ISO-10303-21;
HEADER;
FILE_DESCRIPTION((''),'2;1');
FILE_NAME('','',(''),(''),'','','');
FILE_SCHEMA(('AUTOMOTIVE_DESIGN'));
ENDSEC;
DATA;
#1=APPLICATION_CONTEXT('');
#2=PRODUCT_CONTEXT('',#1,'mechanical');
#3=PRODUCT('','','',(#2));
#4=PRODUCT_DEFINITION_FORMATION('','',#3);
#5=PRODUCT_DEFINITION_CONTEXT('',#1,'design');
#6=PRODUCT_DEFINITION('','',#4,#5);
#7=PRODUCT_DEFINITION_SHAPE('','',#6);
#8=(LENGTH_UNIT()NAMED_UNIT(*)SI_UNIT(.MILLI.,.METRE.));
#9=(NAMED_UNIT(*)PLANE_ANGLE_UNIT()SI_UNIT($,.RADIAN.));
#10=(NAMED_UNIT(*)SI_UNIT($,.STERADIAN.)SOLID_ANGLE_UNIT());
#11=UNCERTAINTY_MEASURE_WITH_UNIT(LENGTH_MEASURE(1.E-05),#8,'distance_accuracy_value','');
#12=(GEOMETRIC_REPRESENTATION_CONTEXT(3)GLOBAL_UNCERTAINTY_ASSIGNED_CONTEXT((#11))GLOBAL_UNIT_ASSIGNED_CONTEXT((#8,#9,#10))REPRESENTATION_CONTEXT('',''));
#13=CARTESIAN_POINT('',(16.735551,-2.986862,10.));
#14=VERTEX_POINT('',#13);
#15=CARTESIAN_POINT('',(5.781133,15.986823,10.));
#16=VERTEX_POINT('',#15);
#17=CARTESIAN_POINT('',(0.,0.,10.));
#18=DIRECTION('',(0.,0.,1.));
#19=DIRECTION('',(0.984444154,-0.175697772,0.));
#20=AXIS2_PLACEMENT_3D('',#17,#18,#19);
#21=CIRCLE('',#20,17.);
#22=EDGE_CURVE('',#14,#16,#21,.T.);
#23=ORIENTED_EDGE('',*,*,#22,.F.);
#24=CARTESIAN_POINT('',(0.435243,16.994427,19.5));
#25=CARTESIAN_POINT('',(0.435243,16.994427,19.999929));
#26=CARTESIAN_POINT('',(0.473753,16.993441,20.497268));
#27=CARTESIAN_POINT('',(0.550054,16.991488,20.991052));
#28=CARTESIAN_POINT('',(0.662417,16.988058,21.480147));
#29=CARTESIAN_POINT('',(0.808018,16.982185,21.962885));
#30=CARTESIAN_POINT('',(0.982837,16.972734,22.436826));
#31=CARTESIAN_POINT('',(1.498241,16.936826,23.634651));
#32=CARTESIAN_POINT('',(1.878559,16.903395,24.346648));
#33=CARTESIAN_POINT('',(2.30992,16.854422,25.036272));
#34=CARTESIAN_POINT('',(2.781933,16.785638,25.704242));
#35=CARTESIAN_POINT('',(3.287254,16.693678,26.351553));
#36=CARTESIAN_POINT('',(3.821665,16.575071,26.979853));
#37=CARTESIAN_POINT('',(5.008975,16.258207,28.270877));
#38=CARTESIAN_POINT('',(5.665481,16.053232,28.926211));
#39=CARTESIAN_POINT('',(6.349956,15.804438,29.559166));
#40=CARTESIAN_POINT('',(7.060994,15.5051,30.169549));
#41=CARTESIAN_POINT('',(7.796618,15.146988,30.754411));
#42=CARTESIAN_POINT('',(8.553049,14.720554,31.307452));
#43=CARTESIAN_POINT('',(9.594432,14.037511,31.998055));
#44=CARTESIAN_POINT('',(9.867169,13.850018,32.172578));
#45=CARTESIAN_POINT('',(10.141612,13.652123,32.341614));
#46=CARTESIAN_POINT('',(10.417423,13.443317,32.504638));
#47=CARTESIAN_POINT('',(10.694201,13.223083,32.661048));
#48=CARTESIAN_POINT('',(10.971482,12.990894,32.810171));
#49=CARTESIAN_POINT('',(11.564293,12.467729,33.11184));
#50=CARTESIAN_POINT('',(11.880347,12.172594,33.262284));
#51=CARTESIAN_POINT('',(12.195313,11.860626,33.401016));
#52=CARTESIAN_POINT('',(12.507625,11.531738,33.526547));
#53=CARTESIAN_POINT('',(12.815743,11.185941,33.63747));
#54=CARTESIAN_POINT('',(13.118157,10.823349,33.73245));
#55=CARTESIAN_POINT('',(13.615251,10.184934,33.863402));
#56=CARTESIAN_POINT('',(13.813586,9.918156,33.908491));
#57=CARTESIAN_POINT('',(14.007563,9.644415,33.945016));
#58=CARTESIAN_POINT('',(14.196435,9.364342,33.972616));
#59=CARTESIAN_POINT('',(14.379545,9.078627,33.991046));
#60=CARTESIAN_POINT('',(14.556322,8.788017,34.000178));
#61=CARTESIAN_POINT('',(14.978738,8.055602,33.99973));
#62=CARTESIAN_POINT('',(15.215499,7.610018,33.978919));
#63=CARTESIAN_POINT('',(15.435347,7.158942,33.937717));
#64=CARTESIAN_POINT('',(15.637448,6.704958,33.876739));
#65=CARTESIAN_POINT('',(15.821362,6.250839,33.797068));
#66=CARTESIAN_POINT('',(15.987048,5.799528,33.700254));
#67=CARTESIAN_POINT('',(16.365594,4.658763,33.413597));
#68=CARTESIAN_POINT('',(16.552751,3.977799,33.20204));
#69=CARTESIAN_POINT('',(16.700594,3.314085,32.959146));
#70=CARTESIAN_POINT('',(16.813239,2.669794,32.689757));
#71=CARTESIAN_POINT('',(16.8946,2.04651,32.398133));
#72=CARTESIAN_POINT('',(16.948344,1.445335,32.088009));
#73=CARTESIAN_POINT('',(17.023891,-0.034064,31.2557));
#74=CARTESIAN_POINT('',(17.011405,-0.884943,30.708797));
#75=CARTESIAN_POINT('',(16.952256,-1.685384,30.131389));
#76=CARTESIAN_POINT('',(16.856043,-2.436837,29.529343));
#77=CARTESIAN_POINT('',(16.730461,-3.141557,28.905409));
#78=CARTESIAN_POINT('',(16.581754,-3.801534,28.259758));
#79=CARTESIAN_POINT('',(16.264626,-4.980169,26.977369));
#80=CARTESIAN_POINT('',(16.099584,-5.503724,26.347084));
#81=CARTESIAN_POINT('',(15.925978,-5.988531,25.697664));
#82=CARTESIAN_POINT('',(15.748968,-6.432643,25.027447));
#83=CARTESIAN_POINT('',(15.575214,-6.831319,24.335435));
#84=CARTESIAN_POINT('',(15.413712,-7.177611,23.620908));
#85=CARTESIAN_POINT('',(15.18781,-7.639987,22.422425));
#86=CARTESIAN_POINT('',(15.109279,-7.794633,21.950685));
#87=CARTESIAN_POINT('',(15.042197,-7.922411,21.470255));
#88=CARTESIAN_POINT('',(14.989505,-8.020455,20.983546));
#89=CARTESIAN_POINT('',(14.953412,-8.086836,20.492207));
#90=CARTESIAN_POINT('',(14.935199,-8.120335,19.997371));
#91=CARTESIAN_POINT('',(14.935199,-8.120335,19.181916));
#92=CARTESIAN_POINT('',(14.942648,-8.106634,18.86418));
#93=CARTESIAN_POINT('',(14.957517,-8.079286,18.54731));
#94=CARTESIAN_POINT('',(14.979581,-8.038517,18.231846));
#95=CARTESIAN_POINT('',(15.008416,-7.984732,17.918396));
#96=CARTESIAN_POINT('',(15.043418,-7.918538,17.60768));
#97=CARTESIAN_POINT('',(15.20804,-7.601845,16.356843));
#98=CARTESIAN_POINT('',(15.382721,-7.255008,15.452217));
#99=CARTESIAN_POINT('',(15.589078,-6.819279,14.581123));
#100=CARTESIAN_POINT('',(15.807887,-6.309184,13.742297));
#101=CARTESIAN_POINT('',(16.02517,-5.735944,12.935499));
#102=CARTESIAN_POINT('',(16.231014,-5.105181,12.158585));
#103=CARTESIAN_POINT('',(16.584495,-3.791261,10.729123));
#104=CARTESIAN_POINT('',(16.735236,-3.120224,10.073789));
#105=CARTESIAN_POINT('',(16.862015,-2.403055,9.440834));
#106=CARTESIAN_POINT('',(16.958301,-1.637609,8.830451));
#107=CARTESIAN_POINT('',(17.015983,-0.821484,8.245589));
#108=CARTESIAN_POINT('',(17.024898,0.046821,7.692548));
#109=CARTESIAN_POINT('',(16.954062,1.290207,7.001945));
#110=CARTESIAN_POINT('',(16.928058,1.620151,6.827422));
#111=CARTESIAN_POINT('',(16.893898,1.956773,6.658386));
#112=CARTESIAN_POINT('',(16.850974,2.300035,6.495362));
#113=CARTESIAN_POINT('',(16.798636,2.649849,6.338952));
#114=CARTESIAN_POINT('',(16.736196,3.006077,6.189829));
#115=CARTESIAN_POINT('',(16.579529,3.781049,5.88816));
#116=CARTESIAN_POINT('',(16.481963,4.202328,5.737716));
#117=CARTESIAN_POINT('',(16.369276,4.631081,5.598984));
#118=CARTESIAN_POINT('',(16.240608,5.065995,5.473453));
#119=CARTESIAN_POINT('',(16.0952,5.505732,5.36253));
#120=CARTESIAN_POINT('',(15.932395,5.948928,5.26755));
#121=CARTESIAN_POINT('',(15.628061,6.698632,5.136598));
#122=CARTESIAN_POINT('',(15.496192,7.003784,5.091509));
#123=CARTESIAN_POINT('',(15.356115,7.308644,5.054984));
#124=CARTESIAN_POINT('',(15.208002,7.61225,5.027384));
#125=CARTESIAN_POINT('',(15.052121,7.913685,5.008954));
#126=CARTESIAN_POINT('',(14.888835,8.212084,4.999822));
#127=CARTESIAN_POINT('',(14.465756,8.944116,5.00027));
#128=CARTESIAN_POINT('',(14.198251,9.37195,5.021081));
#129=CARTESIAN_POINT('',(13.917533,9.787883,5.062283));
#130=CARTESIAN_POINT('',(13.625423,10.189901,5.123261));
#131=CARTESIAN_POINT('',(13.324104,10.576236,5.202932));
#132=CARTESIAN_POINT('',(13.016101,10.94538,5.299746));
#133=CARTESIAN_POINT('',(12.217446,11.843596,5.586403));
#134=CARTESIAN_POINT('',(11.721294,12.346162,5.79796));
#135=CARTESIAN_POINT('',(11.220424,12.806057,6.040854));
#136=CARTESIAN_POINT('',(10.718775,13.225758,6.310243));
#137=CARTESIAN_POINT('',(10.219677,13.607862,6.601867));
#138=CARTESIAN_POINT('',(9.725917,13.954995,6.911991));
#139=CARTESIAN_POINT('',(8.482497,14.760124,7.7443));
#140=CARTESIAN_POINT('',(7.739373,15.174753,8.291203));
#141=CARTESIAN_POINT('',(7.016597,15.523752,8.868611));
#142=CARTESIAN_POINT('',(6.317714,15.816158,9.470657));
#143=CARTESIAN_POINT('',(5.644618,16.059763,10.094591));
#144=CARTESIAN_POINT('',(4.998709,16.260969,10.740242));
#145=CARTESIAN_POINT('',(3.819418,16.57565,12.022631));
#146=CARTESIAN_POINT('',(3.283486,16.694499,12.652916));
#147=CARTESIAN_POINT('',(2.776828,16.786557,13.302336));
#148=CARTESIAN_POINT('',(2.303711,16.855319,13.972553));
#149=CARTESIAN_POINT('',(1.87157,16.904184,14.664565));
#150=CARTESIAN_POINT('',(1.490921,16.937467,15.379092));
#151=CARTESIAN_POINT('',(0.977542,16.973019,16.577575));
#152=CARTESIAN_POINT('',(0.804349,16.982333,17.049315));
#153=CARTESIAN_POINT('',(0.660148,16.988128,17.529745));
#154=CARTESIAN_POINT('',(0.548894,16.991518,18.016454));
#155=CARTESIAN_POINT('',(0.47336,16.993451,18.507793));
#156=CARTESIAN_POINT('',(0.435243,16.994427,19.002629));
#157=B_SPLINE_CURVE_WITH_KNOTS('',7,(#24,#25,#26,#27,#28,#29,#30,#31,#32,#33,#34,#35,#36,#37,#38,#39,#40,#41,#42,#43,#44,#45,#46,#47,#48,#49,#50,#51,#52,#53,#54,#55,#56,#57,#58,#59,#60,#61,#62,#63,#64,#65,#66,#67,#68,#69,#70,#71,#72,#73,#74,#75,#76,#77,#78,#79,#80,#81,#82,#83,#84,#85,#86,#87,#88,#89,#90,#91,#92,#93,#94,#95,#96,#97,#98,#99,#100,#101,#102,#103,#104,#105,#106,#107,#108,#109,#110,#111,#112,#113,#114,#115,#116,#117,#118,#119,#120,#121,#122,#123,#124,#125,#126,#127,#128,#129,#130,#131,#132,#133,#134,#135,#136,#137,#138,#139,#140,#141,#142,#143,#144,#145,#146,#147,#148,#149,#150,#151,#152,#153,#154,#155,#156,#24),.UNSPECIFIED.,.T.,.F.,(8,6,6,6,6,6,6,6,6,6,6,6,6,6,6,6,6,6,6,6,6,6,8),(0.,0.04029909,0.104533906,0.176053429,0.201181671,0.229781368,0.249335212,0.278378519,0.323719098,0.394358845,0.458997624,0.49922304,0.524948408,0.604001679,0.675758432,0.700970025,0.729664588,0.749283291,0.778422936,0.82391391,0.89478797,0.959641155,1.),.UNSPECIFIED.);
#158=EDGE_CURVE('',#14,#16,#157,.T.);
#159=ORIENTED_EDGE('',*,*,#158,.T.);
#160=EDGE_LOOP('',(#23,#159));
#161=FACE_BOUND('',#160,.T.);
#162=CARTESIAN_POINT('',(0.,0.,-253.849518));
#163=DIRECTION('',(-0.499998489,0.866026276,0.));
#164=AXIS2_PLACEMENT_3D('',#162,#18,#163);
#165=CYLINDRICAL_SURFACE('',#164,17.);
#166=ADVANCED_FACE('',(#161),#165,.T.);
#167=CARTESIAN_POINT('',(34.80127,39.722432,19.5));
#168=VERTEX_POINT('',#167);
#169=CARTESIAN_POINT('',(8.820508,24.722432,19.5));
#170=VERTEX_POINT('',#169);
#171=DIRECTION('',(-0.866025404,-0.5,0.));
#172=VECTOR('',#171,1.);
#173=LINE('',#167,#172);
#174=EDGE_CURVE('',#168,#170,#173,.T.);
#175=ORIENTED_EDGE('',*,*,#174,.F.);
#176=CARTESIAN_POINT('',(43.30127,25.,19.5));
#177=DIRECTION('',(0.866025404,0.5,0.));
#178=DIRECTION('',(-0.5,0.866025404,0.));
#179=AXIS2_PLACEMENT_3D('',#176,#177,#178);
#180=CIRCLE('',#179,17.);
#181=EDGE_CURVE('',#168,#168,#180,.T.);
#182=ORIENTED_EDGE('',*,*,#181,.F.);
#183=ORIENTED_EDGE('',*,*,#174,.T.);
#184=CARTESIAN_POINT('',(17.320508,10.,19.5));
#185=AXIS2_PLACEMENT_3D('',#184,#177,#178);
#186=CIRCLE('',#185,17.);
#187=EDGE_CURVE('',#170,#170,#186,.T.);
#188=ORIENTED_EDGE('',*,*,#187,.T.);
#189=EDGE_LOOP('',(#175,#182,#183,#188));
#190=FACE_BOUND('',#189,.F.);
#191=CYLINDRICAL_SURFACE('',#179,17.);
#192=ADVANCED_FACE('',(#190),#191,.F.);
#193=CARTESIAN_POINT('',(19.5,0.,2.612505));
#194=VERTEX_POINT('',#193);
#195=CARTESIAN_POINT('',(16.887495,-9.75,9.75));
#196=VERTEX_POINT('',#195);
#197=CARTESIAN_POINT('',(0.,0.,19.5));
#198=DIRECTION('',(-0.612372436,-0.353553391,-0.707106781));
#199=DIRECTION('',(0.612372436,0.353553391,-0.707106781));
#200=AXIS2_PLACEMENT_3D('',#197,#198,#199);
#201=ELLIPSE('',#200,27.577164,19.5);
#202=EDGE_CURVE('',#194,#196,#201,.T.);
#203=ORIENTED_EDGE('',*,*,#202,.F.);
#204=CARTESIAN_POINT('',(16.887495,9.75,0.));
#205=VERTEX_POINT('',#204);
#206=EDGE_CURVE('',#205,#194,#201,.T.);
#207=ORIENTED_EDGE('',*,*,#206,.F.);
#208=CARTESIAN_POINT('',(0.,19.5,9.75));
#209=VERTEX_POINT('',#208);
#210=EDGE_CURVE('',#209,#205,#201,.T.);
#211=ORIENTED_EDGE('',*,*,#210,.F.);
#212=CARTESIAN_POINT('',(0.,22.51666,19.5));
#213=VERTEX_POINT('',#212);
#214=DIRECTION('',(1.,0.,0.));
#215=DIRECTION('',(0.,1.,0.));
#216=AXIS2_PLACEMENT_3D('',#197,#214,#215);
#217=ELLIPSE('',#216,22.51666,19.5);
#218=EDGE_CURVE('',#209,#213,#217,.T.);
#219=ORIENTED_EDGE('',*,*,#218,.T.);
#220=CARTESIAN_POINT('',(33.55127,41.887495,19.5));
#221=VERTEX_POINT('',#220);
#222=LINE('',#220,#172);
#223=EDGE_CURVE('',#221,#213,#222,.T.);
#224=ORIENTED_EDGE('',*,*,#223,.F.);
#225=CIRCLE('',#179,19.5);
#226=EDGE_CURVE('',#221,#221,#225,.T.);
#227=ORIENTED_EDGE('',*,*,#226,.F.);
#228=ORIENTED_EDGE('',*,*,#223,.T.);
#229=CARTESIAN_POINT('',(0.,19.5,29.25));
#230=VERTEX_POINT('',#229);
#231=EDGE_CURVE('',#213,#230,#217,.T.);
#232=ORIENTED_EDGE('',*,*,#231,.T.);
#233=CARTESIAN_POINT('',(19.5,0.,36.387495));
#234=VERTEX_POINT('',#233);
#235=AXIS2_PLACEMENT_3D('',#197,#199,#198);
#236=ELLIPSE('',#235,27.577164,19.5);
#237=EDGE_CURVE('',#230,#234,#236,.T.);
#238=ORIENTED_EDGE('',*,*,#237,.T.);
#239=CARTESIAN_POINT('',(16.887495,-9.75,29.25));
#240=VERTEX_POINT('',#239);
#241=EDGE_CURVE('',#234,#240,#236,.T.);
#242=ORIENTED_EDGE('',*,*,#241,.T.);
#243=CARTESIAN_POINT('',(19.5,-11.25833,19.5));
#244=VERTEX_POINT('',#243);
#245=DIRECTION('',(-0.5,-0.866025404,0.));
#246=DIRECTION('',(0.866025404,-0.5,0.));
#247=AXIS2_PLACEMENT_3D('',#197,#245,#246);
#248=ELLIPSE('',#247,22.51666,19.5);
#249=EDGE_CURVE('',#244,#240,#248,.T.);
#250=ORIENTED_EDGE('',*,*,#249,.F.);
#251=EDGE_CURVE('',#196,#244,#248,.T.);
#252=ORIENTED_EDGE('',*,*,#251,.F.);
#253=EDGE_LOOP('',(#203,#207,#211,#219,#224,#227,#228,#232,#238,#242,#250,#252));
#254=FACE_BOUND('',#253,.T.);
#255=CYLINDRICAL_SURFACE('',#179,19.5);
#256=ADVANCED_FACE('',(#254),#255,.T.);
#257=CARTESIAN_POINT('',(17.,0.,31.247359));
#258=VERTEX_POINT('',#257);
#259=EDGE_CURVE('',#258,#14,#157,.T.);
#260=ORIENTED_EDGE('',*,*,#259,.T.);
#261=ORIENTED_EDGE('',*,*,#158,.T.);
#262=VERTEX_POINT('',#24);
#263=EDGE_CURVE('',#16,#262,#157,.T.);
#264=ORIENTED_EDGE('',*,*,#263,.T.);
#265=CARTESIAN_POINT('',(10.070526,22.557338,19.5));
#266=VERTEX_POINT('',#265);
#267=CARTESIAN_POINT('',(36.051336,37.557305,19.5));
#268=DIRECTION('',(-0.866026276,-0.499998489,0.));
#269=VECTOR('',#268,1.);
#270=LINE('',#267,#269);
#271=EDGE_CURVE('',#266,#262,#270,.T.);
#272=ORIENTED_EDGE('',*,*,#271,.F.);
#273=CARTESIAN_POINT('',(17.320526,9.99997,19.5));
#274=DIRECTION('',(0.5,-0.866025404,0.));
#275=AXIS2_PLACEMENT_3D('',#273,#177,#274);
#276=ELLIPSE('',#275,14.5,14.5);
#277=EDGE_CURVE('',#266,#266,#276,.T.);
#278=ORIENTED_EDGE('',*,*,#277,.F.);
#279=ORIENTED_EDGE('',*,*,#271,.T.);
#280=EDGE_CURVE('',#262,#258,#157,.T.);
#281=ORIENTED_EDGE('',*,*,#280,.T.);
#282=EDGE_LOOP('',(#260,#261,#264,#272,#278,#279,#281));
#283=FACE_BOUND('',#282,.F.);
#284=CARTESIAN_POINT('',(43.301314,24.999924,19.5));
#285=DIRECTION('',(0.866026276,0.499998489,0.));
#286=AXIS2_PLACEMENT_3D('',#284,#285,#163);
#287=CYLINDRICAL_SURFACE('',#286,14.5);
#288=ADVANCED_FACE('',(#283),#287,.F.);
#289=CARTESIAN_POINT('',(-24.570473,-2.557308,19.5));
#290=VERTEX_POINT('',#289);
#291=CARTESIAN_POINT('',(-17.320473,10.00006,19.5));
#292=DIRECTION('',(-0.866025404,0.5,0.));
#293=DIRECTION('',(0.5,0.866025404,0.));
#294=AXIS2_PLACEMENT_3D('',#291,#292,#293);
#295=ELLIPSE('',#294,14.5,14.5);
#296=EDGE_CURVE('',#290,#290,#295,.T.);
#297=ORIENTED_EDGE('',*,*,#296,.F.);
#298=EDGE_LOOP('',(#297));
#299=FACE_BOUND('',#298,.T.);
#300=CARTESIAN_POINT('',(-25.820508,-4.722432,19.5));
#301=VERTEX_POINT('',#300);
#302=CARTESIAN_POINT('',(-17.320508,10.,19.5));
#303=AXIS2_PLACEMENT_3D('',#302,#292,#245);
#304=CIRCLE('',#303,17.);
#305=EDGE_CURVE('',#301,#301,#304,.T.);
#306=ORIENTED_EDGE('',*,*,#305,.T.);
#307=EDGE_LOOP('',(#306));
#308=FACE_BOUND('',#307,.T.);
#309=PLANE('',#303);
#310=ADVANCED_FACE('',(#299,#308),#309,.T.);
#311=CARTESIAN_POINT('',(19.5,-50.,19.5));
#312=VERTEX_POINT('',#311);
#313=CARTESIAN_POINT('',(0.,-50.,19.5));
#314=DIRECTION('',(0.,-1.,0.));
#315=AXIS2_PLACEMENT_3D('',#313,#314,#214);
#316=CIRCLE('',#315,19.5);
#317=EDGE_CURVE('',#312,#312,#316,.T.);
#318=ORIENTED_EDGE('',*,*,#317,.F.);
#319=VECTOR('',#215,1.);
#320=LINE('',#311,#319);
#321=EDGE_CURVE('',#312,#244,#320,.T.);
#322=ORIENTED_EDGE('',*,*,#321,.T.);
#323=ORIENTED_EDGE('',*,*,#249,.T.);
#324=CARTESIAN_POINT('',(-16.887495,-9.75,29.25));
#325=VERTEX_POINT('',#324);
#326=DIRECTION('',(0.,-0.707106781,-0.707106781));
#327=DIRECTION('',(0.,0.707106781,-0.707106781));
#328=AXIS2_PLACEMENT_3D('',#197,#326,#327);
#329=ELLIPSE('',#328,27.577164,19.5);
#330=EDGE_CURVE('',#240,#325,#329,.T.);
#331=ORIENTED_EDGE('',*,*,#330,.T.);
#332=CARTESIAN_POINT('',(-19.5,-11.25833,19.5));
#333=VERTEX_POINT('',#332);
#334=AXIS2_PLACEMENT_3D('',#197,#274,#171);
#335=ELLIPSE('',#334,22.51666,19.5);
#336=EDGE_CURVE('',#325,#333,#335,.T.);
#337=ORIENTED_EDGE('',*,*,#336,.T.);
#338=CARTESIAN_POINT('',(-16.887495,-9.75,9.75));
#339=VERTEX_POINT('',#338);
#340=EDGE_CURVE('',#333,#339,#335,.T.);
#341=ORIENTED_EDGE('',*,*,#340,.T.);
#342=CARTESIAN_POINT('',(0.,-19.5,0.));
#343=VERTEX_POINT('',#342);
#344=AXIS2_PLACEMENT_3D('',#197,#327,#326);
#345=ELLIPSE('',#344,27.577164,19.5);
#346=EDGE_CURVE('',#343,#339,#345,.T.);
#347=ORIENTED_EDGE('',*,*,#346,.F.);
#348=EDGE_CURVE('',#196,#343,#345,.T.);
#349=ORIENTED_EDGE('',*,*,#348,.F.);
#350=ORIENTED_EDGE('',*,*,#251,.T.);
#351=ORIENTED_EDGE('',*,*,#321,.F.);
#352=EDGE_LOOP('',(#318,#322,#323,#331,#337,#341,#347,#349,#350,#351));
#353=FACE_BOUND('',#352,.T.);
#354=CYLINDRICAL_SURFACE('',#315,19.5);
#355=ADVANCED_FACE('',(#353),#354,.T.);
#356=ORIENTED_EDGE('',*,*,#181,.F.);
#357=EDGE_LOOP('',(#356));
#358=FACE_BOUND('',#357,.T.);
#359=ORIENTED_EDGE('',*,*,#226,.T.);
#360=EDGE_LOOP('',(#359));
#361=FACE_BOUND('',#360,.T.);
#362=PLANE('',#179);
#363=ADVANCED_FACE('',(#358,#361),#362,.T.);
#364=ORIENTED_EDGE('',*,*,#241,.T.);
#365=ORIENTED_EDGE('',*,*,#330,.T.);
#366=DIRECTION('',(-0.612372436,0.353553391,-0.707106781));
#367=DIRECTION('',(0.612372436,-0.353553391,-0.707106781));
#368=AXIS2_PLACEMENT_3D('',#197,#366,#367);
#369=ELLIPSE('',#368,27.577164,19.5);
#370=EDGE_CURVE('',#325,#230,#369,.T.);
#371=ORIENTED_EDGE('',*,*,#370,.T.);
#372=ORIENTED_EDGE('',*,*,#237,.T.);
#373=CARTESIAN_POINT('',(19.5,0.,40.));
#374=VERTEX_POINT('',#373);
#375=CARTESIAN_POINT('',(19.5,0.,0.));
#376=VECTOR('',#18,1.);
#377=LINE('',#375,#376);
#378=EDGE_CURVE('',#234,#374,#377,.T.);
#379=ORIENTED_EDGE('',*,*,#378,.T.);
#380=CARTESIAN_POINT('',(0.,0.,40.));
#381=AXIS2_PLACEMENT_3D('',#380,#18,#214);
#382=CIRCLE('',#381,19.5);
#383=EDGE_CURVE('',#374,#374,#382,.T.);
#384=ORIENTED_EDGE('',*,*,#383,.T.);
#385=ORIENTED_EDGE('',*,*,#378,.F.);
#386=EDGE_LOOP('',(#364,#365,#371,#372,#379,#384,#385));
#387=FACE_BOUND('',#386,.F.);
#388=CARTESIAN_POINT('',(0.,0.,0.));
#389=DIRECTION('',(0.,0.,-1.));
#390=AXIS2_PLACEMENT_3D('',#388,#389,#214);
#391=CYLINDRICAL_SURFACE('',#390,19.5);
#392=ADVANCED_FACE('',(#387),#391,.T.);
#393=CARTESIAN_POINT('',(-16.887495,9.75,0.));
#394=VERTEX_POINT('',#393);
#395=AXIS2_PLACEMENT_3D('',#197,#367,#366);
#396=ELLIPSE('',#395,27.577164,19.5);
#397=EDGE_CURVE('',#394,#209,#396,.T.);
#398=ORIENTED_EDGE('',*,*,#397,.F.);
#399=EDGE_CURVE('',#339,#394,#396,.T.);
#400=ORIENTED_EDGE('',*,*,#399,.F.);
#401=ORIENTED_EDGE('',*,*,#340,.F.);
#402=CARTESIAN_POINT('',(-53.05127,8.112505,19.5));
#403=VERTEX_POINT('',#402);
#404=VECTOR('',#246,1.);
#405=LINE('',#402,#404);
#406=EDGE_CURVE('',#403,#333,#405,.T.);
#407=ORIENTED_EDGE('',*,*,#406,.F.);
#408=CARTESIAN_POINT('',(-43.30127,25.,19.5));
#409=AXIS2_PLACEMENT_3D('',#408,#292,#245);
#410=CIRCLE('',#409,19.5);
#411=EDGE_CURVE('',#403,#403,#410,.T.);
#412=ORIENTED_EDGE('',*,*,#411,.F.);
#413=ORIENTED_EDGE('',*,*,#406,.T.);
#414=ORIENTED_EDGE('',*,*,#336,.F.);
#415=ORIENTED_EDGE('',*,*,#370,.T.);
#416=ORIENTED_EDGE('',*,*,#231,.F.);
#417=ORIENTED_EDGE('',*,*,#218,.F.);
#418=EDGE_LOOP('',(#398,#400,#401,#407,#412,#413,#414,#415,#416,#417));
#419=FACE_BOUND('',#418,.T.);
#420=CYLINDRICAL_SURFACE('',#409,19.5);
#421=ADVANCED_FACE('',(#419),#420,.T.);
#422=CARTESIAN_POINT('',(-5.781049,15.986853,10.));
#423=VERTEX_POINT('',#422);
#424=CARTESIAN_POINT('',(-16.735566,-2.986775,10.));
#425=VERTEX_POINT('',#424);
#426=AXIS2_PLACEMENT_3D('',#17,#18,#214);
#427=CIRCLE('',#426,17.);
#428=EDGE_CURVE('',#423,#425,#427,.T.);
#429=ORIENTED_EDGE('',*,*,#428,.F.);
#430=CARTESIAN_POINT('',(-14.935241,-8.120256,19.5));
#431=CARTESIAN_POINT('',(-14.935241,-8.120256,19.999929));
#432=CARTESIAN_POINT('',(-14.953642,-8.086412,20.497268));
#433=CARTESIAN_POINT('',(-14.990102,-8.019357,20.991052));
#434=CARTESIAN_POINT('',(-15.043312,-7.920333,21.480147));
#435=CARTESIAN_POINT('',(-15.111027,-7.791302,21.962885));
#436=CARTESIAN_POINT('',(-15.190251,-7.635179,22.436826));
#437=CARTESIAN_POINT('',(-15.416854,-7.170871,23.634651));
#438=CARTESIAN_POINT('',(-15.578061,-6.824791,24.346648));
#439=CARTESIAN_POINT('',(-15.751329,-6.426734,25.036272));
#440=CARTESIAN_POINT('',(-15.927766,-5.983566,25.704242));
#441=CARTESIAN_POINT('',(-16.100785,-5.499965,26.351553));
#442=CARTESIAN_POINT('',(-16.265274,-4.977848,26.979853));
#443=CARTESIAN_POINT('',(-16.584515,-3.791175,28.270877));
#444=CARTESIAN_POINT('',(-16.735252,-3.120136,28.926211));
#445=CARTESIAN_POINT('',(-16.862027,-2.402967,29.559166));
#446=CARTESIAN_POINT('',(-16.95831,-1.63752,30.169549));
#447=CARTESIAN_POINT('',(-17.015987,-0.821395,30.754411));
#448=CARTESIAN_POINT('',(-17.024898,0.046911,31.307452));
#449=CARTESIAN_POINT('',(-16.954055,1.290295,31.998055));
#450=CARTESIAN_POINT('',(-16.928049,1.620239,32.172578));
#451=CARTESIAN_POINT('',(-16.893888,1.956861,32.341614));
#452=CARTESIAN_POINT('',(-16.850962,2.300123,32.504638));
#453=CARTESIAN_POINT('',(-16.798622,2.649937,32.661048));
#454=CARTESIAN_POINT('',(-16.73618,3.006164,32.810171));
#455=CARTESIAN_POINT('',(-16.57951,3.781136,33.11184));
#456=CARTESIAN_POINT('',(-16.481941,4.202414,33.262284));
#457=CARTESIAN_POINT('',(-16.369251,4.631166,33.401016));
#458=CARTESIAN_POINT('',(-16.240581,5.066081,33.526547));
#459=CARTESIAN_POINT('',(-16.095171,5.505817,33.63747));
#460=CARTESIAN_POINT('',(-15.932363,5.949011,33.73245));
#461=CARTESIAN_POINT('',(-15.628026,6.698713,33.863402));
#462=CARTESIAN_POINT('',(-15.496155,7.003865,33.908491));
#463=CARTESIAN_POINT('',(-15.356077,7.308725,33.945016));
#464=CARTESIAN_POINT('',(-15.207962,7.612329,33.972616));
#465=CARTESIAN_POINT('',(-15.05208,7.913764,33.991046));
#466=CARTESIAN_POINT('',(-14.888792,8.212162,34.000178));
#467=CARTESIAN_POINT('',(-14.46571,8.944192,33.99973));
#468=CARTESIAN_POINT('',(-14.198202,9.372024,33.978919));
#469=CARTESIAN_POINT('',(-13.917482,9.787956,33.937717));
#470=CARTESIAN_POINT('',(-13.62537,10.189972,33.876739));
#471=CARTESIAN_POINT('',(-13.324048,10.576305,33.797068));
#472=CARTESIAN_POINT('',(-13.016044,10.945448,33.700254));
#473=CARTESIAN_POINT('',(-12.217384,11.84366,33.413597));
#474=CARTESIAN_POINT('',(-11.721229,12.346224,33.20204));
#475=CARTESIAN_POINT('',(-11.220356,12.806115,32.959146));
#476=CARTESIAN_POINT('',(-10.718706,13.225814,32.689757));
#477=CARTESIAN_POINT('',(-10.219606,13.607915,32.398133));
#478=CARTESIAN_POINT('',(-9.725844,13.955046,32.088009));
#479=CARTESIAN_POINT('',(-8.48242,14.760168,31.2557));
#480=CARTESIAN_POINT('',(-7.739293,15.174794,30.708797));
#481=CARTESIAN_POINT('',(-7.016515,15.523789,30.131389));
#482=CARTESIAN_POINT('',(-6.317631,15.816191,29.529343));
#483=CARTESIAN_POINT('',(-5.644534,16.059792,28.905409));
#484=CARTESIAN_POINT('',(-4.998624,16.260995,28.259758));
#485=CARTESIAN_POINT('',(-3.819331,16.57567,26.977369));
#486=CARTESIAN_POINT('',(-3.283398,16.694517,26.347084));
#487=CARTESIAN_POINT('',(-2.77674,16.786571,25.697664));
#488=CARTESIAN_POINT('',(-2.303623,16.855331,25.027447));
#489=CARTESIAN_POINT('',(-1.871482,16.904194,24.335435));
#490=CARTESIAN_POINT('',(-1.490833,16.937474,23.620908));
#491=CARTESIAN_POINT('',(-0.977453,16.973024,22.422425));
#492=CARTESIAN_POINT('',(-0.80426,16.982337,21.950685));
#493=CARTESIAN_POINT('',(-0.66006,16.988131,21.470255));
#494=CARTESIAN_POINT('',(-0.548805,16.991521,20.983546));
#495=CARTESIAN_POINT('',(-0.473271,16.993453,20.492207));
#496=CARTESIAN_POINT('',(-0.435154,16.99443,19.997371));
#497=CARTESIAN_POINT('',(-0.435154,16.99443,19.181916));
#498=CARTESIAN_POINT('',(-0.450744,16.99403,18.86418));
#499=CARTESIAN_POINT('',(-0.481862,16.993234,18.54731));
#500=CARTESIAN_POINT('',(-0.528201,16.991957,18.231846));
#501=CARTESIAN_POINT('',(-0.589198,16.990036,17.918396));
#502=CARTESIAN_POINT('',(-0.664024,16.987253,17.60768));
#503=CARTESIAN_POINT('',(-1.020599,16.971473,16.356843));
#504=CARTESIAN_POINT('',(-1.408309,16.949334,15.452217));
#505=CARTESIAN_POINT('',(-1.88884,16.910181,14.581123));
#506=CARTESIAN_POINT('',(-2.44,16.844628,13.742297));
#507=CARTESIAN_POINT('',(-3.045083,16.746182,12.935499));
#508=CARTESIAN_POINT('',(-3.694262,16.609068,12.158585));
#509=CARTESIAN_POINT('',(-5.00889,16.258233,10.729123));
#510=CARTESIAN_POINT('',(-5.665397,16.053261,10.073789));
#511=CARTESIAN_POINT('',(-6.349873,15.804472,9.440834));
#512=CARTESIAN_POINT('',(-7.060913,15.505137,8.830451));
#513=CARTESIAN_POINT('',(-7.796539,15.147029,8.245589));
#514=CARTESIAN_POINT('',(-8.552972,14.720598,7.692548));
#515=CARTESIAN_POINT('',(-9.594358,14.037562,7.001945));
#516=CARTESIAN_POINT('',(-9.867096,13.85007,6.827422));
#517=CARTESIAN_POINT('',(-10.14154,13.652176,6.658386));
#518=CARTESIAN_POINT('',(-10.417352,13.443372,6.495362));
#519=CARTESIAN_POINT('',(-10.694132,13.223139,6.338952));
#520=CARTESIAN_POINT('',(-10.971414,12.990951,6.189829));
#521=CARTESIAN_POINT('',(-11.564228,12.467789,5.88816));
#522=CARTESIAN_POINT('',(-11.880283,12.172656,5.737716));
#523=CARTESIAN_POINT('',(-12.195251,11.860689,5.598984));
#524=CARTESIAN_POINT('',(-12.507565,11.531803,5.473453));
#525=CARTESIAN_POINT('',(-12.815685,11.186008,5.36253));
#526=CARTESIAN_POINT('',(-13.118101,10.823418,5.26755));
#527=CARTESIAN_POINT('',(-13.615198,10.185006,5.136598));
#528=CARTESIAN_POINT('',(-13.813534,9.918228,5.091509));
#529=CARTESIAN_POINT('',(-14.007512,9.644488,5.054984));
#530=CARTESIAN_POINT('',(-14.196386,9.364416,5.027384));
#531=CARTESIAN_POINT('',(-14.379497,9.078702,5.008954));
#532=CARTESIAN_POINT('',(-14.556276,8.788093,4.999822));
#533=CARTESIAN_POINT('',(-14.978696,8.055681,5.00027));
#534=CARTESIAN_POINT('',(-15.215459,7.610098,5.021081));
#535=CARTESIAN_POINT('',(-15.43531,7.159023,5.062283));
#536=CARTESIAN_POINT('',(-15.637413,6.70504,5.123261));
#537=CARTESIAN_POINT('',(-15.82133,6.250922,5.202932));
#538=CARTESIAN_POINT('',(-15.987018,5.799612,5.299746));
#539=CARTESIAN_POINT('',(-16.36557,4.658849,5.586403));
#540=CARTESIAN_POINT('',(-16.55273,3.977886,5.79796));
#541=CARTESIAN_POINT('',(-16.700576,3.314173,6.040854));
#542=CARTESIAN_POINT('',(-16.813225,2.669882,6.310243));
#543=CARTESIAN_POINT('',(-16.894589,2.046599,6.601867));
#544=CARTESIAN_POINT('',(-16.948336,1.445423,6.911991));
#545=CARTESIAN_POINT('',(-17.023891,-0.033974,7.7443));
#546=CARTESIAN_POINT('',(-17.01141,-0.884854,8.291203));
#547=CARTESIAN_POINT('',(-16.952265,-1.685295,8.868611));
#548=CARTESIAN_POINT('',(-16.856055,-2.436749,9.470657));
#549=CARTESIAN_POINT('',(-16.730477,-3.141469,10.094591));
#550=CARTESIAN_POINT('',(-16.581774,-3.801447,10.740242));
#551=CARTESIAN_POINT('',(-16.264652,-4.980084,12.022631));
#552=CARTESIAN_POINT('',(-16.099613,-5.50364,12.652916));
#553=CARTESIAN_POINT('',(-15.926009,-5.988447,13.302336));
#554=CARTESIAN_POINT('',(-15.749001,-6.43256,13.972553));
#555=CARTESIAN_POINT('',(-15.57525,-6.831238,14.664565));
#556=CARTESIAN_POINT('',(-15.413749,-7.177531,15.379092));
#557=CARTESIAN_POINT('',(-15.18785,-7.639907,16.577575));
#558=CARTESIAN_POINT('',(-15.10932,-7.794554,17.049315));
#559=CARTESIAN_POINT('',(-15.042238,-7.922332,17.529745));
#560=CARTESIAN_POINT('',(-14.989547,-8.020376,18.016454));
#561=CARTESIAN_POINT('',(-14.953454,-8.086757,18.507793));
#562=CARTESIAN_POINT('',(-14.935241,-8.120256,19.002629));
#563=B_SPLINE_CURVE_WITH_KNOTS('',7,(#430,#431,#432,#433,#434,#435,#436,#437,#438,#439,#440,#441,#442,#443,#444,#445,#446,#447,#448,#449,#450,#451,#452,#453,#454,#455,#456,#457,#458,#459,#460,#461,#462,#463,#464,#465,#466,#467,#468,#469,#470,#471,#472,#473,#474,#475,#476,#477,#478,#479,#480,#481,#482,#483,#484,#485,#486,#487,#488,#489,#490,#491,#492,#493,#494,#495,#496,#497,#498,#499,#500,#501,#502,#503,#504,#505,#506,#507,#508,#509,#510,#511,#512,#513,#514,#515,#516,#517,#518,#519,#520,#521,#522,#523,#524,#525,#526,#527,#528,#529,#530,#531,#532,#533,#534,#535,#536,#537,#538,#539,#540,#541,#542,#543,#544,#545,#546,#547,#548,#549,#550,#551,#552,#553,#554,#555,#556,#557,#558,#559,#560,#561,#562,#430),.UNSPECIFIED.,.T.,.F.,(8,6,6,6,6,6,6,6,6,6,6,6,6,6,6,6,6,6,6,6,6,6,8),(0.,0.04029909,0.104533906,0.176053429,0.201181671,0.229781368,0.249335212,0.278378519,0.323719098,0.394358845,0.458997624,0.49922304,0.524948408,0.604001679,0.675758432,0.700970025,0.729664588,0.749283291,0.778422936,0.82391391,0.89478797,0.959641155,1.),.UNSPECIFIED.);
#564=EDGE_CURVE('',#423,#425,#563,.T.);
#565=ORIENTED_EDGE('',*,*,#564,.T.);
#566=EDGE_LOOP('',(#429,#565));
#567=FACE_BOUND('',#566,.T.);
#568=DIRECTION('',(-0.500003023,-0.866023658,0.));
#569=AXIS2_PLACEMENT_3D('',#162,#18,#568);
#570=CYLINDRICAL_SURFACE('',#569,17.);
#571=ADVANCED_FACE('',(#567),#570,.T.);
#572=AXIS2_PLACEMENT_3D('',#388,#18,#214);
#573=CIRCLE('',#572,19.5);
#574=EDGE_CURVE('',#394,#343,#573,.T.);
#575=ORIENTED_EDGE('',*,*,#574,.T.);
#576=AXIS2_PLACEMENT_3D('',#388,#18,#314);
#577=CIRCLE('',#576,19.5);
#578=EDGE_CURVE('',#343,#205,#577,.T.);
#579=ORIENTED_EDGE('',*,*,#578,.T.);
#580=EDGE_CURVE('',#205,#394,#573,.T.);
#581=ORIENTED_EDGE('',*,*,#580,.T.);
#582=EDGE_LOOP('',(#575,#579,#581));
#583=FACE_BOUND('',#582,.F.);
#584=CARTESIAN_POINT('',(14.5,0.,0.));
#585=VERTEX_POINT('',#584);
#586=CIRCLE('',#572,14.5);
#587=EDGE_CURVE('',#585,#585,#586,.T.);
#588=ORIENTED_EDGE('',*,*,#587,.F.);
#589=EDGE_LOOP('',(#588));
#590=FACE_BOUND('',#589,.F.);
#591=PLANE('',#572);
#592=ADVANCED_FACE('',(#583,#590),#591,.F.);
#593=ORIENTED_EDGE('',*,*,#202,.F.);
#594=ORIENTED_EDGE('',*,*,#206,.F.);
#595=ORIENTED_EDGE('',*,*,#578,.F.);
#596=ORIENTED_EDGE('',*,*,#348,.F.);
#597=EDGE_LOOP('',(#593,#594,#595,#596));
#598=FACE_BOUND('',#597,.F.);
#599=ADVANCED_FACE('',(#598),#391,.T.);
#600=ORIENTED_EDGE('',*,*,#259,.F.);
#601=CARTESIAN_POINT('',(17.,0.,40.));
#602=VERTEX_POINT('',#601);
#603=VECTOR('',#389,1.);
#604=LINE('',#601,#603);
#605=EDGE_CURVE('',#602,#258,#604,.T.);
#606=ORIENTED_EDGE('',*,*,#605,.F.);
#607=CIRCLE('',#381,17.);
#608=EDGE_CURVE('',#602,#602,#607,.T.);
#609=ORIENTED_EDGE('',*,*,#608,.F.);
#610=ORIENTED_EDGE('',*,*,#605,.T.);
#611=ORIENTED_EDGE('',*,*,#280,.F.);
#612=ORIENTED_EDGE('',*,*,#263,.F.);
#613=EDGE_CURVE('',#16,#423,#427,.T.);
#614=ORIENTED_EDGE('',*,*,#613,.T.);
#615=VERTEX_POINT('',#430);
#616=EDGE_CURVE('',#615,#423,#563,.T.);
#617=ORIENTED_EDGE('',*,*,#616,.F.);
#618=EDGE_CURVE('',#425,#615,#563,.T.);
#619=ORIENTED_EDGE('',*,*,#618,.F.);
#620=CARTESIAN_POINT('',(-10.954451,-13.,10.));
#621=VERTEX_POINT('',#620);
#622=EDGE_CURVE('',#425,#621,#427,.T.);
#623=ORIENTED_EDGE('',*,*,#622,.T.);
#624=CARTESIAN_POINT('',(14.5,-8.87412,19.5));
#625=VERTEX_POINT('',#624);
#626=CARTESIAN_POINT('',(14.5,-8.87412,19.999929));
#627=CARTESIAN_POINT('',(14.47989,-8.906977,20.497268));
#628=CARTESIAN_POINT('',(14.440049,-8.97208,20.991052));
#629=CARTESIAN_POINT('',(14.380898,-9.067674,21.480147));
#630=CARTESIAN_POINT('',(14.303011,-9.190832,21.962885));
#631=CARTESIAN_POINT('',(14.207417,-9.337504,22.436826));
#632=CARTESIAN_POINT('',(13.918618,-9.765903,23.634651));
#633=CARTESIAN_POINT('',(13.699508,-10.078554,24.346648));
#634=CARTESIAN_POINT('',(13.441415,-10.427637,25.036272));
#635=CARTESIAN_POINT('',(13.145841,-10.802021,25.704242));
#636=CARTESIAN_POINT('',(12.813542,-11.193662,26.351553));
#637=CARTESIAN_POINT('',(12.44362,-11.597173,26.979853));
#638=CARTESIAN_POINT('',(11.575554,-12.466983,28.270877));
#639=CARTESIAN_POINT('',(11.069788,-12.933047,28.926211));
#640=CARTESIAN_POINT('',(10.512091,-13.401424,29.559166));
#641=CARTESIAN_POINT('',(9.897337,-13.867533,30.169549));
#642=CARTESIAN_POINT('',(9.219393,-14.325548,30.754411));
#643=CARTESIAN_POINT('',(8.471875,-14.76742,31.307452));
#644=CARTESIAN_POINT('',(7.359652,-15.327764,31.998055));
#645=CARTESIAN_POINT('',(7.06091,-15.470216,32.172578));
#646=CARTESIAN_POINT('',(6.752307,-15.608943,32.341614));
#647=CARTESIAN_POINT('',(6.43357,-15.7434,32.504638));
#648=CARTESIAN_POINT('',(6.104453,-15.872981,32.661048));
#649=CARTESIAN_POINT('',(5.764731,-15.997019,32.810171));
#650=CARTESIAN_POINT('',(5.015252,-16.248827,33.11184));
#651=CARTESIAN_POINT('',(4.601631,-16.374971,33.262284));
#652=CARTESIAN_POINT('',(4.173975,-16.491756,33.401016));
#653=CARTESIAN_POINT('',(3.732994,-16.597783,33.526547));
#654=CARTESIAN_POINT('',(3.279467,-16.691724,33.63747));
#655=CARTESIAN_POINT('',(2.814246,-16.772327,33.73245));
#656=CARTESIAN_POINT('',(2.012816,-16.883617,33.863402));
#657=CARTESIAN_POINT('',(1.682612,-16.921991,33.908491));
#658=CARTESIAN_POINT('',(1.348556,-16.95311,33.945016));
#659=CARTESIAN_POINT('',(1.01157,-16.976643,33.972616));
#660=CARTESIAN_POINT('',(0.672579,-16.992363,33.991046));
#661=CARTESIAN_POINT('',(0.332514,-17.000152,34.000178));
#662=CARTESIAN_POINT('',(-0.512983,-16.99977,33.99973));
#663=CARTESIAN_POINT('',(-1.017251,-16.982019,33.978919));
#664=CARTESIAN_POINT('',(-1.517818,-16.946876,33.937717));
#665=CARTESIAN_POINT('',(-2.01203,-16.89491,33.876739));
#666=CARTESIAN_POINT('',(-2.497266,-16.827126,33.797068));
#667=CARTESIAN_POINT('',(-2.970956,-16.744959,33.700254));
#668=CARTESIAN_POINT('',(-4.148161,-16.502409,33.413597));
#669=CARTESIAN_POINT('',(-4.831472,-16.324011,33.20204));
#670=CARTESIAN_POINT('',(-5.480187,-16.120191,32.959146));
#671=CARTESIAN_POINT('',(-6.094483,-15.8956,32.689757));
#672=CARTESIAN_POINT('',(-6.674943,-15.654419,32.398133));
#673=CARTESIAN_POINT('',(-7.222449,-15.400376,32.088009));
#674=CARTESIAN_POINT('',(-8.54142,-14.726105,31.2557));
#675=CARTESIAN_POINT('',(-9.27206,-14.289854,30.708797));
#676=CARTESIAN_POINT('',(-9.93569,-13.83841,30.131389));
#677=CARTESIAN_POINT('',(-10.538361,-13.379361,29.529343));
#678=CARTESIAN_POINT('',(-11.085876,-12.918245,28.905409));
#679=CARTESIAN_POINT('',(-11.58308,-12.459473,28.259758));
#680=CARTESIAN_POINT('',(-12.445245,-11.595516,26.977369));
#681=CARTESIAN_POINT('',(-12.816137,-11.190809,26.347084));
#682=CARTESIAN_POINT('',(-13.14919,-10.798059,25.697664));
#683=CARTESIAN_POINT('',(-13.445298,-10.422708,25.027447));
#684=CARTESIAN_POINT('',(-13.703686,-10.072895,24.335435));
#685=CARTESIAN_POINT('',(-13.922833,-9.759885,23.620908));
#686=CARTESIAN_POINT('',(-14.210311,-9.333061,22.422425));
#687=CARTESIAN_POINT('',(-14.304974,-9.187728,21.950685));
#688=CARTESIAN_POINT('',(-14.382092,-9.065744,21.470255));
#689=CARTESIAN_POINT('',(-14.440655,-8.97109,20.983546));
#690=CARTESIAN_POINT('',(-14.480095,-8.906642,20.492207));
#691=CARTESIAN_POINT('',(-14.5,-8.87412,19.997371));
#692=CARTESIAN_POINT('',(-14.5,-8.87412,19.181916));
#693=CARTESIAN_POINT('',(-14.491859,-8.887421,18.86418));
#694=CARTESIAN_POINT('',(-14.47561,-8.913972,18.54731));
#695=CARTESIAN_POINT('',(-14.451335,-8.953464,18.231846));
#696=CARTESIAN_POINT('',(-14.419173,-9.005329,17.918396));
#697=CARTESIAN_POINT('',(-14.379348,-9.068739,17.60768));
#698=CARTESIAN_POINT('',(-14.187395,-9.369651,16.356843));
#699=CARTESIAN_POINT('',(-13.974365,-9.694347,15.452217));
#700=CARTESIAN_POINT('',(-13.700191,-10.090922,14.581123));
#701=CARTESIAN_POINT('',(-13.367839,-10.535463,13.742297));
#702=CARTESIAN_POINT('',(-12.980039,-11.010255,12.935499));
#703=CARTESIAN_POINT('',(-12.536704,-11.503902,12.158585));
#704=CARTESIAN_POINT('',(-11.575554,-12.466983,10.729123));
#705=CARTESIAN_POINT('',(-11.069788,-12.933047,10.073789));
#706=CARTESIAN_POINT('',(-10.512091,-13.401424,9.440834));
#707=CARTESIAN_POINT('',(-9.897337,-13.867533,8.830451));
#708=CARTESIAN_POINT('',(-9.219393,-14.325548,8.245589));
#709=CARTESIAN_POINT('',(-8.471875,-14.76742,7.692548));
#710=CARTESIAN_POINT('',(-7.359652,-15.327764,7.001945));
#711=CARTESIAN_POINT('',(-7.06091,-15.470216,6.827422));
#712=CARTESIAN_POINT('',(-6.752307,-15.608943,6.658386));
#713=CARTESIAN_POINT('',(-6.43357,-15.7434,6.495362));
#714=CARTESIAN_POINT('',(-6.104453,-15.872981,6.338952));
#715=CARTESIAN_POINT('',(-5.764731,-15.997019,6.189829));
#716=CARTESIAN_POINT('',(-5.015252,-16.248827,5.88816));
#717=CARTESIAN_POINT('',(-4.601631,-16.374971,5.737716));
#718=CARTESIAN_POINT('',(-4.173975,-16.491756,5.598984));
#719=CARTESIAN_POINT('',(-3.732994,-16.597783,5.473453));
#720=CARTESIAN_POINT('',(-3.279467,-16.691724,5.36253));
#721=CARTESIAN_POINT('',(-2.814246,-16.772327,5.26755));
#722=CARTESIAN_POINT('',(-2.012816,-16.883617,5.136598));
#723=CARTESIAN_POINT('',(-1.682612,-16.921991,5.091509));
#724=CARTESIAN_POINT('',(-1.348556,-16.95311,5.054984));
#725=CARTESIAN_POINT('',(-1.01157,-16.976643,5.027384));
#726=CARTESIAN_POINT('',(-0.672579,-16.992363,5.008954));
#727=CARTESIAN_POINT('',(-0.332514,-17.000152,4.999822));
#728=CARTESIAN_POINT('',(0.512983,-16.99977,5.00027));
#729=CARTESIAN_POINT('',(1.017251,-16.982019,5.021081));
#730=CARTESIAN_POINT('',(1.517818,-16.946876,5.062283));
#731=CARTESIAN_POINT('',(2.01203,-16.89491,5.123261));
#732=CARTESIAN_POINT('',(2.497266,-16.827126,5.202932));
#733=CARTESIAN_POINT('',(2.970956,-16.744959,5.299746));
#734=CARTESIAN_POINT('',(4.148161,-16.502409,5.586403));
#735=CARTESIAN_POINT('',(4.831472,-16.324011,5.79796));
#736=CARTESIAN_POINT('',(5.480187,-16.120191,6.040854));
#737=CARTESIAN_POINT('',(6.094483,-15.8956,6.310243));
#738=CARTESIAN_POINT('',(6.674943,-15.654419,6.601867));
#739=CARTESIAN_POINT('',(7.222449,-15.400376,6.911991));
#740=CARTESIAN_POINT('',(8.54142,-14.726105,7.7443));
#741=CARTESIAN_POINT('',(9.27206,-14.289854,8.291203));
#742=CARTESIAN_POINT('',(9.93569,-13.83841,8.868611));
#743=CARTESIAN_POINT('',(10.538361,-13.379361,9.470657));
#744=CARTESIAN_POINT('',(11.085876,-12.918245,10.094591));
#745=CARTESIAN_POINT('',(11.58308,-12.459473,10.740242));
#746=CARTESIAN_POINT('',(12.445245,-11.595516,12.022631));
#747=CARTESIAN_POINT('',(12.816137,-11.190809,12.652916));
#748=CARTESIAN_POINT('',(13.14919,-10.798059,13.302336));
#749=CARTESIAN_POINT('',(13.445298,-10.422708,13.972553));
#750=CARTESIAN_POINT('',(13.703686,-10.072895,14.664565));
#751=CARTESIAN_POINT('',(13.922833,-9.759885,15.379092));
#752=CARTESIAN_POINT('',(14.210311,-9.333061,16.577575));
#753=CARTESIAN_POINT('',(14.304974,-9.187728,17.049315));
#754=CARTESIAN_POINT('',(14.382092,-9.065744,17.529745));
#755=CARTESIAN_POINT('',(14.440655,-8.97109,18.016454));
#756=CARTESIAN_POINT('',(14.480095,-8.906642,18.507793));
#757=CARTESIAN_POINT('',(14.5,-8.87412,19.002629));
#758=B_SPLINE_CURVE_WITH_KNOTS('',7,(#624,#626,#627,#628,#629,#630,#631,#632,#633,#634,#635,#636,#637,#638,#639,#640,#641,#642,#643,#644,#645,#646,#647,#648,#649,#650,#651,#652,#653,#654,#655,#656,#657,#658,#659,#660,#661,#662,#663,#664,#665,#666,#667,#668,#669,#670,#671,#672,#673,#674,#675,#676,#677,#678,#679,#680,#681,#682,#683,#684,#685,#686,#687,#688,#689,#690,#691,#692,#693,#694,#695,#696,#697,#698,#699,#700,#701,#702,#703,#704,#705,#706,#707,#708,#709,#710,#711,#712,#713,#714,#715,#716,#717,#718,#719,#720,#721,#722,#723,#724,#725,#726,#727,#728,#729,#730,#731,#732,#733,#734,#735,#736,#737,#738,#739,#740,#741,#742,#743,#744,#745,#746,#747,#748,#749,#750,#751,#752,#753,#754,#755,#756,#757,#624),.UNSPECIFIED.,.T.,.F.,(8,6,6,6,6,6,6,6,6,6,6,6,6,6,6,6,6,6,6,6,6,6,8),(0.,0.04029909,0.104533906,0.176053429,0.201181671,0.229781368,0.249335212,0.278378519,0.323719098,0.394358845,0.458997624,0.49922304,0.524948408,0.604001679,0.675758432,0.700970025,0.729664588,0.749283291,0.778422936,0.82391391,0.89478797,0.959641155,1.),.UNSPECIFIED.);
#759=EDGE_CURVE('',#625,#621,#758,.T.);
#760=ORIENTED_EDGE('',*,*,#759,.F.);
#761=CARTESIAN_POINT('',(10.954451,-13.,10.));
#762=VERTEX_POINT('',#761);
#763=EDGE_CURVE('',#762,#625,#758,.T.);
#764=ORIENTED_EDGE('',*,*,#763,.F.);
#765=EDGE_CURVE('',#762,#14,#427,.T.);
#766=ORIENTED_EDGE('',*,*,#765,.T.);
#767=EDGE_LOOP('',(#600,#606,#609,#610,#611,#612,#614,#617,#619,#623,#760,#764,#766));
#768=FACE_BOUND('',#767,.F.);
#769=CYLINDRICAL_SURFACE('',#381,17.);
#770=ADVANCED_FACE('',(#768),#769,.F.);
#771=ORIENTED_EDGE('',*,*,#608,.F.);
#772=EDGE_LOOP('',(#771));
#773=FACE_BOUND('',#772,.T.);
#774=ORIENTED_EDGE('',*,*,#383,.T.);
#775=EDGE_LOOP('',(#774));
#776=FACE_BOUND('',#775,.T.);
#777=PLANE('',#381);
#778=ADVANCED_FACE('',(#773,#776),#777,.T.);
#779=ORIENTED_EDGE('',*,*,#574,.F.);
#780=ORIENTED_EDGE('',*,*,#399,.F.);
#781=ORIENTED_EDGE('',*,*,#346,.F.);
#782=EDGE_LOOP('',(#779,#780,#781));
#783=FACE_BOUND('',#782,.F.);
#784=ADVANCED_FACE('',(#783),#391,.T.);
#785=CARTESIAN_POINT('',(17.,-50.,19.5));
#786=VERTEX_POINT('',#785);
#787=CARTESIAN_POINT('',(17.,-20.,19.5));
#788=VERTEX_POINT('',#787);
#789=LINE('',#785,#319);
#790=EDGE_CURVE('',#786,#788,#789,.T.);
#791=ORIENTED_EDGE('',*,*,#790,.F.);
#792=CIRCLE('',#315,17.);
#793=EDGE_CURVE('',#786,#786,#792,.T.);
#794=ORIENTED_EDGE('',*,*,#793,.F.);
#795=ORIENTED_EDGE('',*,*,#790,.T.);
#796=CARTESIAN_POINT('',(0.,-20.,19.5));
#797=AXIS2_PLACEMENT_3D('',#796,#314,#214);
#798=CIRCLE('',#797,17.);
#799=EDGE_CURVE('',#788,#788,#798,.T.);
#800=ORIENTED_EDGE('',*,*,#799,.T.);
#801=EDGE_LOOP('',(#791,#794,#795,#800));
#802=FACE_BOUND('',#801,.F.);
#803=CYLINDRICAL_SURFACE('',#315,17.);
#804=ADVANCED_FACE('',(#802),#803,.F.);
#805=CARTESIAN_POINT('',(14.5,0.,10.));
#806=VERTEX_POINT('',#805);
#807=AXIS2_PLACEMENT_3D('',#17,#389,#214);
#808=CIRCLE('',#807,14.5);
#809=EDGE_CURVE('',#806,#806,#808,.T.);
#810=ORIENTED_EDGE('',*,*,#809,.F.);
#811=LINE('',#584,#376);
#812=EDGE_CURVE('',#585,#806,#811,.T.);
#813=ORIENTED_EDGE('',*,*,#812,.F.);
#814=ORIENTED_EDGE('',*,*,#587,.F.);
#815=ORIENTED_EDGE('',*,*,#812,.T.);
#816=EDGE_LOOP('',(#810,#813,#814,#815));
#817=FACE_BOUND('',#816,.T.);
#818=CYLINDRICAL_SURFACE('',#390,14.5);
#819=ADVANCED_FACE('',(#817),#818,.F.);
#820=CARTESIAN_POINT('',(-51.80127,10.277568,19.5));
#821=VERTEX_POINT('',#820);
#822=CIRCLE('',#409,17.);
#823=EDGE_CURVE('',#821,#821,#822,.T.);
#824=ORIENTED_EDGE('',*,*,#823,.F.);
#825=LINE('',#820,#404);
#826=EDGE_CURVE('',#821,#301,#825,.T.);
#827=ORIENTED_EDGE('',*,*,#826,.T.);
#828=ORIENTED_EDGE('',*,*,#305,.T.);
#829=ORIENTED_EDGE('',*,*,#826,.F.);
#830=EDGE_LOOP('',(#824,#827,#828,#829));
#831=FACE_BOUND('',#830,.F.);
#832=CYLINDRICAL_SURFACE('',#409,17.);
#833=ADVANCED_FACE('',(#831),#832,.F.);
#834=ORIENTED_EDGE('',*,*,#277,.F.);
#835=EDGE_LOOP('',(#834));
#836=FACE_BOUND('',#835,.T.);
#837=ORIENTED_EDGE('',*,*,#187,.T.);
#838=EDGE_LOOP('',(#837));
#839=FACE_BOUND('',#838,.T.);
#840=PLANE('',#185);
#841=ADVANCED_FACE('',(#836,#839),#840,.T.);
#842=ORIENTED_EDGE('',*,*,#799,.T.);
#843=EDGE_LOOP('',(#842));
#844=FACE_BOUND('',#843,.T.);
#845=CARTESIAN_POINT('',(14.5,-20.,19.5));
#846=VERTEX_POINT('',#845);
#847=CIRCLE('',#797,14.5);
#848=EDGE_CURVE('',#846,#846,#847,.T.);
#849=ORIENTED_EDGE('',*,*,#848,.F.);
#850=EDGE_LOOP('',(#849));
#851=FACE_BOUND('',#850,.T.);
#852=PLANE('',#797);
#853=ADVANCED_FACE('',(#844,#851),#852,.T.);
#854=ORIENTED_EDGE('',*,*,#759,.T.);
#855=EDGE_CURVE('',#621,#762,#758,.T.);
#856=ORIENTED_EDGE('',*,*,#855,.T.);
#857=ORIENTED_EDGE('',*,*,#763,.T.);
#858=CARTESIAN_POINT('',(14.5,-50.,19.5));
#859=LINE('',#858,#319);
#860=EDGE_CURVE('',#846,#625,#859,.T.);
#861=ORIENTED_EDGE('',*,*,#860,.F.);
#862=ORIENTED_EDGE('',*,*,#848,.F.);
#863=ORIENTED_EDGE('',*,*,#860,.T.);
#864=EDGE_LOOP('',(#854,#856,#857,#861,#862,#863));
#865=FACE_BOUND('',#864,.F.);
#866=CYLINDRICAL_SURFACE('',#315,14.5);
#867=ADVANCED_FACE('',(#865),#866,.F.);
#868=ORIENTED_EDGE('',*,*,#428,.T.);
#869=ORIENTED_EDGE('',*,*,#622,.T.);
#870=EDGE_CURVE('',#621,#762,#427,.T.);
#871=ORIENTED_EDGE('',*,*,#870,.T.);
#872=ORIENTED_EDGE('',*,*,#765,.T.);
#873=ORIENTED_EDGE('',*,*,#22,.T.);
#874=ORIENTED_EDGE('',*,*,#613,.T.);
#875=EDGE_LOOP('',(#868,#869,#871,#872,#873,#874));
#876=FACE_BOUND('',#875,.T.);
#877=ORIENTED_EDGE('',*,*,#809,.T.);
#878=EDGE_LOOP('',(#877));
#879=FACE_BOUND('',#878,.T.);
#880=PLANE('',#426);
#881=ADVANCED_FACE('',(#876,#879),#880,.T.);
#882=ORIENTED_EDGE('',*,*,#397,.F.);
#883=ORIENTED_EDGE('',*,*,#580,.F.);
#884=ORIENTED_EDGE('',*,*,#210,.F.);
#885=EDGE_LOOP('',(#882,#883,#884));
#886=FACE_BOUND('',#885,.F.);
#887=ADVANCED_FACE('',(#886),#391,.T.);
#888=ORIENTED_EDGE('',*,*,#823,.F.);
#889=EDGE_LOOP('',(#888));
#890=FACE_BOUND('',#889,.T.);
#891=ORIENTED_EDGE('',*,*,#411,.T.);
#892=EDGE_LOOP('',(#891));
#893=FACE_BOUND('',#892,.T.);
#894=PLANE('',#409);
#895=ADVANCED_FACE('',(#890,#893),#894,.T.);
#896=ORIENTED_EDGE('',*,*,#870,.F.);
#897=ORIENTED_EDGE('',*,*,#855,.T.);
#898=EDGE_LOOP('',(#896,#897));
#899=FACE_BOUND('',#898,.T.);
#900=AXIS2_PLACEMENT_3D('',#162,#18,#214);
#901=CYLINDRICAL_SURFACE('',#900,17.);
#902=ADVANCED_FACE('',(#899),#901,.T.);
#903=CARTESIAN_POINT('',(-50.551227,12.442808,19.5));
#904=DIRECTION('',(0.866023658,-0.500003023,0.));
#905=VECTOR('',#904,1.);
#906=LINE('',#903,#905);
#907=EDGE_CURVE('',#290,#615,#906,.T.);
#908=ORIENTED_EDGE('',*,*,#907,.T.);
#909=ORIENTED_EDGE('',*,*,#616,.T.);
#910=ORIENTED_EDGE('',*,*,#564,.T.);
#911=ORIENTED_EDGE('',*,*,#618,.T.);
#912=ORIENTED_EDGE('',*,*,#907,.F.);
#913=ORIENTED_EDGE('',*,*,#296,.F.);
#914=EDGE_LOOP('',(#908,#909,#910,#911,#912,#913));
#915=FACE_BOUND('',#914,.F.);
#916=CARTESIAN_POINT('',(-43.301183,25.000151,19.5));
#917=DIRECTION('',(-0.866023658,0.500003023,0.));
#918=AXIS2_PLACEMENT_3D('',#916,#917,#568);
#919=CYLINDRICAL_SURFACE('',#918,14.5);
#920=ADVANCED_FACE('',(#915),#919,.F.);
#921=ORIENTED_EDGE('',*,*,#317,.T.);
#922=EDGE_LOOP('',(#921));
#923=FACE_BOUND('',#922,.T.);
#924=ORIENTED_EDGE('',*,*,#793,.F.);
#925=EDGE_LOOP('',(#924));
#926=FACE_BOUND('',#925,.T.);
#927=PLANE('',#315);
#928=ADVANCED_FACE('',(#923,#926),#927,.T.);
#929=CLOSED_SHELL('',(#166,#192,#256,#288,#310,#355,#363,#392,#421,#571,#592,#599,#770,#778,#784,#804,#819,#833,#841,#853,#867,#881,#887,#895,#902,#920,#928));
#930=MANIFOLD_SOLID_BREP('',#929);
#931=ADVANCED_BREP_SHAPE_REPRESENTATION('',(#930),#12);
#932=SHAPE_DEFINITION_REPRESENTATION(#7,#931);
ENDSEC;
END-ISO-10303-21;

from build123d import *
from build123d import SkipClean  # not in build123d's __all__

# Parameters (mm, degrees)
F0_R             = 19.5
F0_R_2           = 14.5
F1_DEPTH         = 40
F2_R             = 17
F3_DEPTH         = 30
F5_R             = 19.5
F6_COPIES_COUNT  = 3
F8_END_RADIUS    = 17
F7_R             = 14.5
F8_REACH         = 132.9006886826
F8_COPIES_COUNT  = 3
F8_COPIES_ANGLE  = 239.9998
F9_R             = 17
F10_DEPTH        = 30
F10_COPIES_COUNT = 3


# Not quite as in the source:
# - a pattern or mirror of a feature is missing from the dataset's text; its kind, count and spacing are read off the source's solid


with BuildPart() as f1:
    # F0 (on Top) → F1 (new body)
    with BuildSketch(Plane.XY):
        Circle(F0_R)
        Circle(F0_R_2, mode=Mode.SUBTRACT)
    extrude(amount=F1_DEPTH)

    # F2 (on face) → F3 (cut)
    with BuildSketch(Plane.XY.offset(40)):
        Circle(F2_R)
    extrude(amount=-F3_DEPTH, mode=Mode.SUBTRACT)

    # F5 (on offset) → F6 (join, up to the next surface of F1)
    with BuildSketch(Plane.XZ.offset(50)):
        with Locations((0, 19.5)):
            Circle(F5_R)
    with SkipClean():  # cleaning this boolean's faces spoils the solid; the shape is the same uncleaned
        f6 = extrude(until=Until.NEXT, dir=(0, 1, 0))

    # F6_copies: F6 ×3 about axis
    f6_copies_axis = Axis((0, 0, 0), (0, 0, 1))
    for i in range(1, F6_COPIES_COUNT):
        add(f6.rotate(f6_copies_axis, i * 360 / F6_COPIES_COUNT), clean=False)

    f8_end = (Plane.XY.offset(25) * Cylinder(F8_END_RADIUS, 557.6990366969, mode=Mode.PRIVATE)).faces().sort_by_distance((-17, 0, 25))[0]
    # F7 (on offset) → F8 (cut, up to the whole of a round face its end follows)
    with BuildSketch(Plane.XZ.offset(50)):
        with Locations((0, 19.5)):
            Circle(F7_R)
    f8_long = extrude(amount=-F8_REACH, mode=Mode.PRIVATE)
    f8 = split(f8_long, bisect_by=f8_end, keep=Keep.ALL, mode=Mode.PRIVATE).solids().sort_by_distance((0, -50, 19.5))[0]
    add(f8, mode=Mode.SUBTRACT)

    # F8_copies: F8 ×3 about axis
    f8_copies_axis = Axis((0, 0, 0), (0, 0, 1))
    for i in range(1, F8_COPIES_COUNT):
        add(f8.rotate(f8_copies_axis, i * F8_COPIES_ANGLE / (F8_COPIES_COUNT - 1)), clean=False, mode=Mode.SUBTRACT)

    # F9 (on offset) → F10 (cut)
    with BuildSketch(Plane.XZ.offset(50)):
        with Locations((0, 19.5)):
            Circle(F9_R)
    f10 = extrude(amount=-F10_DEPTH, mode=Mode.SUBTRACT)

    # F10_copies: F10 ×3 about axis
    f10_copies_axis = Axis((0, 0, 0), (0, 0, 1))
    for i in range(1, F10_COPIES_COUNT):
        add(f10.rotate(f10_copies_axis, i * 360 / F10_COPIES_COUNT), clean=False, mode=Mode.SUBTRACT)


solid = f1.part
